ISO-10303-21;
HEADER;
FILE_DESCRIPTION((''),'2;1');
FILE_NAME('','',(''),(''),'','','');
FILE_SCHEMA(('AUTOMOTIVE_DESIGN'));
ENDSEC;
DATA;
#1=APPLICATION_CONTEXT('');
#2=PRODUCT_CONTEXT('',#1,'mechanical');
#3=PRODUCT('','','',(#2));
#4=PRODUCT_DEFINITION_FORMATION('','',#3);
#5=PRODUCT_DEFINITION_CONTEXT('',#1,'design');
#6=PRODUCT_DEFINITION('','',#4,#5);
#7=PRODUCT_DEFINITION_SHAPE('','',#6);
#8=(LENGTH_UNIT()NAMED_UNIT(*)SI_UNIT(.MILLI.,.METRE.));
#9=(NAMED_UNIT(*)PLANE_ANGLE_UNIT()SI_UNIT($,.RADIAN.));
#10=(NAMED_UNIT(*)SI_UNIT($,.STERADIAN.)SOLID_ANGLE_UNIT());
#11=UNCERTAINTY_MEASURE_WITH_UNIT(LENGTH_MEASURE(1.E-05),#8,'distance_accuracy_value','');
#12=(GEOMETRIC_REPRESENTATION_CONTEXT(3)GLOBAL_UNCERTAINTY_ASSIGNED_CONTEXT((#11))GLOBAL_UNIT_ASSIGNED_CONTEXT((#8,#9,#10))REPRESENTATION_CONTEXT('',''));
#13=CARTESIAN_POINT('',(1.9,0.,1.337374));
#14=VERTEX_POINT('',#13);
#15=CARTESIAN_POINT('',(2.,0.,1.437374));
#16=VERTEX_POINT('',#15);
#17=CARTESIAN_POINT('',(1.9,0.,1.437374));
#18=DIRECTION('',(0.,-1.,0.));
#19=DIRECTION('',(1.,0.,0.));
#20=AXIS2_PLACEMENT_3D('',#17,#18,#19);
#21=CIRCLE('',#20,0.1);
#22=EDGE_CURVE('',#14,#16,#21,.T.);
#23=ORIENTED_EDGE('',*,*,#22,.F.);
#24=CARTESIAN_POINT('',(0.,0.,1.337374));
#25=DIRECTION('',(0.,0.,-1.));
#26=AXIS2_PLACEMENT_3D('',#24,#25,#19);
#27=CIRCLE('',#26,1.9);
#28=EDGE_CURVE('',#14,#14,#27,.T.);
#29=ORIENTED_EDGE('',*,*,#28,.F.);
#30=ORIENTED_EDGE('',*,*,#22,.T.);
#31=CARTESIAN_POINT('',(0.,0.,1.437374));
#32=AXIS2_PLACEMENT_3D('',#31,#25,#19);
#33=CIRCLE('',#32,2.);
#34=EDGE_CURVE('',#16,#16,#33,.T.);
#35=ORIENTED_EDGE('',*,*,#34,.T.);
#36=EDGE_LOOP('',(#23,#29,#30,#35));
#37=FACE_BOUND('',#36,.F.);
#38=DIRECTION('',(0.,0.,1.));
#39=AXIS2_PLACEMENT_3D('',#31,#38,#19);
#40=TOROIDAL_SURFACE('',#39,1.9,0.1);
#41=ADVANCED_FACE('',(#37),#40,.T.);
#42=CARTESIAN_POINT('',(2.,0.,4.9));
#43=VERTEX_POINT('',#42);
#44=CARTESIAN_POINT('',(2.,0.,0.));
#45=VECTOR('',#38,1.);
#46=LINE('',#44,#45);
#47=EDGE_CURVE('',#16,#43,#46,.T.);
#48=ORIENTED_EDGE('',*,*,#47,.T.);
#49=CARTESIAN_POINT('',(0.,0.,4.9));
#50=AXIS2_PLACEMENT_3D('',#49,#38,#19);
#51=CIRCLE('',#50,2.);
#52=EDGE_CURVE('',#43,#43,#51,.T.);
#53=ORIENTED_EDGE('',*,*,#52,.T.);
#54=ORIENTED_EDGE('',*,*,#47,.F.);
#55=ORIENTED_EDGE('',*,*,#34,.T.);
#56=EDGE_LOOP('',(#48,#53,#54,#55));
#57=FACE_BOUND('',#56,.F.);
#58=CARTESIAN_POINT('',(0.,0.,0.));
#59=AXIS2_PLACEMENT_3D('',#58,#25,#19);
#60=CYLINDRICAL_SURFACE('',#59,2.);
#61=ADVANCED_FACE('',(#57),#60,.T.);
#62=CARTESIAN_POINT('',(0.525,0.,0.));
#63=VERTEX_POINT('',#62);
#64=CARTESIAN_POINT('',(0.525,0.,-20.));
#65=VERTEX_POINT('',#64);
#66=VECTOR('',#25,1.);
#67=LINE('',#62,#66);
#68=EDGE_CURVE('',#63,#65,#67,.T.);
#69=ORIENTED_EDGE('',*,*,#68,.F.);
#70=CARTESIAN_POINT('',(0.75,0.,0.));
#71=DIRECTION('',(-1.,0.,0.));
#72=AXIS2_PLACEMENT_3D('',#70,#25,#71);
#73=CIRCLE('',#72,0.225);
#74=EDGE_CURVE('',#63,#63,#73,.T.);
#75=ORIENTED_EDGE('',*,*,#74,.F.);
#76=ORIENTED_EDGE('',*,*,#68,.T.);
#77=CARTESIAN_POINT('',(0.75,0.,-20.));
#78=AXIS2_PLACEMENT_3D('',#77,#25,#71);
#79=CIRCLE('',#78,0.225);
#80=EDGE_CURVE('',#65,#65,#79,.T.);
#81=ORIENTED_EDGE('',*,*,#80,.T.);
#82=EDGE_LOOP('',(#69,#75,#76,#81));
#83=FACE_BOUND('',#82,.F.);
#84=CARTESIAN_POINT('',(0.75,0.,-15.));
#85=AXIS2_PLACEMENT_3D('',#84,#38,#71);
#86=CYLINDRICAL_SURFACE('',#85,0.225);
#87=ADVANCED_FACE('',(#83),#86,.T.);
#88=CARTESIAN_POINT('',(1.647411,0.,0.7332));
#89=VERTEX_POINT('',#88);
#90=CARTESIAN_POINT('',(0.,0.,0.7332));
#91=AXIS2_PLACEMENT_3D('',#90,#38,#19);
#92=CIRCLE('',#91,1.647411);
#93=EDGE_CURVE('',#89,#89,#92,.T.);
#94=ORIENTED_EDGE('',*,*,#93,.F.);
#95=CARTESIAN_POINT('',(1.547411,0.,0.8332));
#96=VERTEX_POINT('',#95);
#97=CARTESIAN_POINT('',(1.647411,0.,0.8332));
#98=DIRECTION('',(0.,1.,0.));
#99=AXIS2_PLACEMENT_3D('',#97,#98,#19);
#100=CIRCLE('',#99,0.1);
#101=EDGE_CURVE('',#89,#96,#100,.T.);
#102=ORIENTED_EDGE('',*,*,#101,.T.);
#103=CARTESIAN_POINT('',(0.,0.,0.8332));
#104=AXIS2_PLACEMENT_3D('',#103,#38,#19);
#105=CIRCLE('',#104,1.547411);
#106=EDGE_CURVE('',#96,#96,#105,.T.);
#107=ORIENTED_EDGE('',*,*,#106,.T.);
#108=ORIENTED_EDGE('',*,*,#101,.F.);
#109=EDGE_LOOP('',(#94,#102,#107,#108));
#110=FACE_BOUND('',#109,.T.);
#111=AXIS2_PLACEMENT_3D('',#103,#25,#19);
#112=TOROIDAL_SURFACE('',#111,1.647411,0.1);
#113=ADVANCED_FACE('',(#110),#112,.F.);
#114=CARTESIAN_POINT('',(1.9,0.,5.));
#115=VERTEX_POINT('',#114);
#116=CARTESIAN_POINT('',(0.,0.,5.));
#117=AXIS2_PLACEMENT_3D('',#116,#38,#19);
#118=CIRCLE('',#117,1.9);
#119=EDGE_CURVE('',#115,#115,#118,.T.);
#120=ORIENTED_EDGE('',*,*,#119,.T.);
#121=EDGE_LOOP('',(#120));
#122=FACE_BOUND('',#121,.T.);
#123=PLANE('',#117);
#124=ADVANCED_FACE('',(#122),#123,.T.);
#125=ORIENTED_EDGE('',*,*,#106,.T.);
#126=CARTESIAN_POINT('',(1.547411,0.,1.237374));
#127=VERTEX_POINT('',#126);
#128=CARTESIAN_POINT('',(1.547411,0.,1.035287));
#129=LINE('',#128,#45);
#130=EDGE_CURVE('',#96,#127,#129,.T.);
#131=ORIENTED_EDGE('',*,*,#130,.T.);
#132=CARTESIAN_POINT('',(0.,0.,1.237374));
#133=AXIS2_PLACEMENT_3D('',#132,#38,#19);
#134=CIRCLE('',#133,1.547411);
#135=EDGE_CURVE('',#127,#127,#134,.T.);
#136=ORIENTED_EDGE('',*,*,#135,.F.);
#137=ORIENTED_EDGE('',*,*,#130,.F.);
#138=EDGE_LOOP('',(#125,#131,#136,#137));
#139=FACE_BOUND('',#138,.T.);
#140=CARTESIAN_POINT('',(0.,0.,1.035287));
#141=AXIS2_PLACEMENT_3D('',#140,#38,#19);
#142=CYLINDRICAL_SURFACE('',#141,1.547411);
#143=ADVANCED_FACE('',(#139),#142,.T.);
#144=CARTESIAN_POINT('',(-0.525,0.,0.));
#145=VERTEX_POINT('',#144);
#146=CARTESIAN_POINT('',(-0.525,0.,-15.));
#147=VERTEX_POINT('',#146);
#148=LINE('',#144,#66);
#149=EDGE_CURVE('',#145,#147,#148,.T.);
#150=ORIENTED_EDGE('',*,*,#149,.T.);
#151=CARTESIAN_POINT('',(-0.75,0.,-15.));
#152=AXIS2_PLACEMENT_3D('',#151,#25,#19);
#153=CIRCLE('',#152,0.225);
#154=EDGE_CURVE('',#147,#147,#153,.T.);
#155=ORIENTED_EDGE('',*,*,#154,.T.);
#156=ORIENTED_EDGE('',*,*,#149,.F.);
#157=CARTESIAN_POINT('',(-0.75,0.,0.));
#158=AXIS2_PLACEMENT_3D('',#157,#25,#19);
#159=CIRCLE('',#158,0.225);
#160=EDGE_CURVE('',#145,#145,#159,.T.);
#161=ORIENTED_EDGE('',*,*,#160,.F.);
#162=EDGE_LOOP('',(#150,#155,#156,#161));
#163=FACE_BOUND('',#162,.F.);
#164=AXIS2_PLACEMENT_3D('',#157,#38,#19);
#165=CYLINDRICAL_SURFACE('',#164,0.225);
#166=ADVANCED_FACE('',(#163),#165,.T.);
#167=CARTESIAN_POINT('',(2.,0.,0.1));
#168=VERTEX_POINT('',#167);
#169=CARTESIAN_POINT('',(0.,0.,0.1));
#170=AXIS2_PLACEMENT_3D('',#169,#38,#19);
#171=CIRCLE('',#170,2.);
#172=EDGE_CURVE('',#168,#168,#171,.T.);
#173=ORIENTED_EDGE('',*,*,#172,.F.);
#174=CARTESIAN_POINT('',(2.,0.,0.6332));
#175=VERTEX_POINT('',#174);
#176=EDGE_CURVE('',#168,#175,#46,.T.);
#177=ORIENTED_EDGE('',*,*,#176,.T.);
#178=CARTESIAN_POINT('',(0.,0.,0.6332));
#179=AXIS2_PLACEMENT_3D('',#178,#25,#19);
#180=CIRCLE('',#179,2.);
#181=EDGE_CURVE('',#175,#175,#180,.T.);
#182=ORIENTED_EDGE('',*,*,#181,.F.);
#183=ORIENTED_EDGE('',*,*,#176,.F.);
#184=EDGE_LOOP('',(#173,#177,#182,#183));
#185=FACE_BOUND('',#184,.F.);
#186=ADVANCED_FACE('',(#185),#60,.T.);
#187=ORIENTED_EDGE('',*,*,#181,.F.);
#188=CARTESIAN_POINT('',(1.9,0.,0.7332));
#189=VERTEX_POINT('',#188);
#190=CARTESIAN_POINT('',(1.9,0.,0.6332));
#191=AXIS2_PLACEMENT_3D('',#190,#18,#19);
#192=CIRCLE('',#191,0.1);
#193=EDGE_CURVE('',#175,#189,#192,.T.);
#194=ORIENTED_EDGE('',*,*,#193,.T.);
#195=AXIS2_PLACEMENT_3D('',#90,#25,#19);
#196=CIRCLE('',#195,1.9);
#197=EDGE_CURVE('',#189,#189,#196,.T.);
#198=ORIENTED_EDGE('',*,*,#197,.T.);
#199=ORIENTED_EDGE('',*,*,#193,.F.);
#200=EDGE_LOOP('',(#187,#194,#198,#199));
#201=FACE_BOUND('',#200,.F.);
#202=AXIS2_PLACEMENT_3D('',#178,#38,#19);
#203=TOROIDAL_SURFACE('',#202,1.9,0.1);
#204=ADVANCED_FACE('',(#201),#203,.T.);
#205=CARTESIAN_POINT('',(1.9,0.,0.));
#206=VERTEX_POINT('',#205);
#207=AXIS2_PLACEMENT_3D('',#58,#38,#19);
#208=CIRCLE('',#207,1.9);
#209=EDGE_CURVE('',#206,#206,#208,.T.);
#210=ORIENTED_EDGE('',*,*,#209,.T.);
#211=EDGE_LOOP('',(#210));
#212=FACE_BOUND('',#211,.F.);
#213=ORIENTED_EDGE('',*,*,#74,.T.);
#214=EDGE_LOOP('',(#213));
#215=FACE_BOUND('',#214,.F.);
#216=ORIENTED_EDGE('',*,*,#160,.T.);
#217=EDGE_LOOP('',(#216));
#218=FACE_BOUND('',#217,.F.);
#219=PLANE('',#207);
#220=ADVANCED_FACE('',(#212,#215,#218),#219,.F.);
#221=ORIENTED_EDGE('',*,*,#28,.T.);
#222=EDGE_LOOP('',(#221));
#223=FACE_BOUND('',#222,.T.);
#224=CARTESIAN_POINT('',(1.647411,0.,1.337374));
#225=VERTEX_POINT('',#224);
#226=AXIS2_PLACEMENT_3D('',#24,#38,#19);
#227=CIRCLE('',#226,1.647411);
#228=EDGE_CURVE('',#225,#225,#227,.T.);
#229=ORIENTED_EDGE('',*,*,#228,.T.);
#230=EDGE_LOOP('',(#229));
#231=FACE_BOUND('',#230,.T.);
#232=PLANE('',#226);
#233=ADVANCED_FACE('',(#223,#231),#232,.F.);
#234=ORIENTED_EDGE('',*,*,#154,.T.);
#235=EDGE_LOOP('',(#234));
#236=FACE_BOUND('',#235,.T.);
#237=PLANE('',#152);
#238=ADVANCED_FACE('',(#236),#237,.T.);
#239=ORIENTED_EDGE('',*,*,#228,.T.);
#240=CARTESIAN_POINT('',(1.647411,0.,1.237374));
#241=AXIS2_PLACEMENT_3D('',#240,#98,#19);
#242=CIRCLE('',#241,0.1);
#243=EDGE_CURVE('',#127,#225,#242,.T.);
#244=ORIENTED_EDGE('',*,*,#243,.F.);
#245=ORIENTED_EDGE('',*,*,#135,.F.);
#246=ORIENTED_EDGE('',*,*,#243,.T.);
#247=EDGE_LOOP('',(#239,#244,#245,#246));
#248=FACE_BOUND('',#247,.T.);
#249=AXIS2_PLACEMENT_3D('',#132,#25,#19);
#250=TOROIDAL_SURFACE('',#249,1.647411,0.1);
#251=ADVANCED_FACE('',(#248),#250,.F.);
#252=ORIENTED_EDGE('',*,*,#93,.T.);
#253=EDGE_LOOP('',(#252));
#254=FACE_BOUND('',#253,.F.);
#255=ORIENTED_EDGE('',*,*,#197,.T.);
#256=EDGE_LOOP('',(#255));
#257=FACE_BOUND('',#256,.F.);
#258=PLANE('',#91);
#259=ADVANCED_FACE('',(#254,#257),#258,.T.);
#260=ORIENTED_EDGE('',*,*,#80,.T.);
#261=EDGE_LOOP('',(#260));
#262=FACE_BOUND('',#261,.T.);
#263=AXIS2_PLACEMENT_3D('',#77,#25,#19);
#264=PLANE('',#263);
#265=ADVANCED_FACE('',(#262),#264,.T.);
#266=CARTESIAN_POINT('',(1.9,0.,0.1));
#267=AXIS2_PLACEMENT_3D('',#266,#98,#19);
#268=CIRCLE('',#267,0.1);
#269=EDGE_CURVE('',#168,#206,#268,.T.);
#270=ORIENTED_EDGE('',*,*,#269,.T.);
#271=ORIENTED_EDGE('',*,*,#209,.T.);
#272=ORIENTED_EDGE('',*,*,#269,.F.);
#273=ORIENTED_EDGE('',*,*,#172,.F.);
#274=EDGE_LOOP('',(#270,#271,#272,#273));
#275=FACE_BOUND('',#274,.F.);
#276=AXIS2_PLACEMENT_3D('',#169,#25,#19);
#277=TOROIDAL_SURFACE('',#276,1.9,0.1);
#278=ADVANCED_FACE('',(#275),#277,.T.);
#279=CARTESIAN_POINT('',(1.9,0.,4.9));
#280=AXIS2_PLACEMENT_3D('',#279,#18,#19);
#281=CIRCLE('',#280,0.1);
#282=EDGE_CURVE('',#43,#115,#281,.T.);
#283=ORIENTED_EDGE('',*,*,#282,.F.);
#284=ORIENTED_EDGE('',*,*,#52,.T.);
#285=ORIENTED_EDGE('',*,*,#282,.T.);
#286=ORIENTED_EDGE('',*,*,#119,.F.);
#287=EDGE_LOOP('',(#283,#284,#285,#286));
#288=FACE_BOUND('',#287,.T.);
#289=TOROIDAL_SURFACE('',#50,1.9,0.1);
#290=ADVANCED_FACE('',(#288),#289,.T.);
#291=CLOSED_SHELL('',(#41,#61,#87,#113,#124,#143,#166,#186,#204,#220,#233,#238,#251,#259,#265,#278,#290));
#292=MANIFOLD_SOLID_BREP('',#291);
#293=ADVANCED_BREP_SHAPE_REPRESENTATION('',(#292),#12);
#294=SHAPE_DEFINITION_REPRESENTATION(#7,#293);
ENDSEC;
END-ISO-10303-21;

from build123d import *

# Parameters (mm, degrees)
F0_R     = 2
F1_DEPTH = 5
F2_W     = 1.057303627
F2_H     = 0.604173576
F4_R     = 0.1
F5_R     = 0.225
F6_DEPTH = 15
F7_DEPTH = 5


with BuildPart() as f1:
    # F0 (on Top) → F1 (new body)
    with BuildSketch(Plane.XY):
        Circle(F0_R)
    extrude(amount=F1_DEPTH)

    # F2 (on Front) → F3 (revolve, cut)
    with BuildSketch(Plane.XZ):
        with Locations((2.0760625484, 1.0352871905)):
            Rectangle(F2_W, F2_H)
    revolve(axis=Axis((0, 0, 0), (0, 0, 1)), mode=Mode.SUBTRACT)

    # F4
    f4_edges = [f1.edges().sort_by_distance(p)[0] for p in [
        (-2, 0, 1.337374),
        (-1.547411, 0, 1.337374),
        (-1.547411, 0, 0.7332),
        (-2, 0, 0.7332),
        (-2, 0, 5),
        (-2, 0, 0),
    ]]
    fillet(f4_edges, radius=F4_R)

    # F5 (on face) → F6 (join)
    with BuildSketch(Plane(origin=(0, 0, 0), x_dir=(1, 0, 0), z_dir=(0, 0, -1))):
        with Locations((-0.75, 0)):
            Circle(F5_R)
        with BuildLine():
            ThreePointArc((0.975, 0), (0.75, 0.225), (0.525, 0))
            ThreePointArc((0.525, 0), (0.75, -0.225), (0.975, 0))
        make_face()
    extrude(amount=F6_DEPTH)

    # F7 (add): a face of the model
    f7_faces = [f1.faces().sort_by_distance(p)[0] for p in [
        (0.75, 0, -15),
    ]]
    extrude(f7_faces, amount=F7_DEPTH)


solid = f1.part
